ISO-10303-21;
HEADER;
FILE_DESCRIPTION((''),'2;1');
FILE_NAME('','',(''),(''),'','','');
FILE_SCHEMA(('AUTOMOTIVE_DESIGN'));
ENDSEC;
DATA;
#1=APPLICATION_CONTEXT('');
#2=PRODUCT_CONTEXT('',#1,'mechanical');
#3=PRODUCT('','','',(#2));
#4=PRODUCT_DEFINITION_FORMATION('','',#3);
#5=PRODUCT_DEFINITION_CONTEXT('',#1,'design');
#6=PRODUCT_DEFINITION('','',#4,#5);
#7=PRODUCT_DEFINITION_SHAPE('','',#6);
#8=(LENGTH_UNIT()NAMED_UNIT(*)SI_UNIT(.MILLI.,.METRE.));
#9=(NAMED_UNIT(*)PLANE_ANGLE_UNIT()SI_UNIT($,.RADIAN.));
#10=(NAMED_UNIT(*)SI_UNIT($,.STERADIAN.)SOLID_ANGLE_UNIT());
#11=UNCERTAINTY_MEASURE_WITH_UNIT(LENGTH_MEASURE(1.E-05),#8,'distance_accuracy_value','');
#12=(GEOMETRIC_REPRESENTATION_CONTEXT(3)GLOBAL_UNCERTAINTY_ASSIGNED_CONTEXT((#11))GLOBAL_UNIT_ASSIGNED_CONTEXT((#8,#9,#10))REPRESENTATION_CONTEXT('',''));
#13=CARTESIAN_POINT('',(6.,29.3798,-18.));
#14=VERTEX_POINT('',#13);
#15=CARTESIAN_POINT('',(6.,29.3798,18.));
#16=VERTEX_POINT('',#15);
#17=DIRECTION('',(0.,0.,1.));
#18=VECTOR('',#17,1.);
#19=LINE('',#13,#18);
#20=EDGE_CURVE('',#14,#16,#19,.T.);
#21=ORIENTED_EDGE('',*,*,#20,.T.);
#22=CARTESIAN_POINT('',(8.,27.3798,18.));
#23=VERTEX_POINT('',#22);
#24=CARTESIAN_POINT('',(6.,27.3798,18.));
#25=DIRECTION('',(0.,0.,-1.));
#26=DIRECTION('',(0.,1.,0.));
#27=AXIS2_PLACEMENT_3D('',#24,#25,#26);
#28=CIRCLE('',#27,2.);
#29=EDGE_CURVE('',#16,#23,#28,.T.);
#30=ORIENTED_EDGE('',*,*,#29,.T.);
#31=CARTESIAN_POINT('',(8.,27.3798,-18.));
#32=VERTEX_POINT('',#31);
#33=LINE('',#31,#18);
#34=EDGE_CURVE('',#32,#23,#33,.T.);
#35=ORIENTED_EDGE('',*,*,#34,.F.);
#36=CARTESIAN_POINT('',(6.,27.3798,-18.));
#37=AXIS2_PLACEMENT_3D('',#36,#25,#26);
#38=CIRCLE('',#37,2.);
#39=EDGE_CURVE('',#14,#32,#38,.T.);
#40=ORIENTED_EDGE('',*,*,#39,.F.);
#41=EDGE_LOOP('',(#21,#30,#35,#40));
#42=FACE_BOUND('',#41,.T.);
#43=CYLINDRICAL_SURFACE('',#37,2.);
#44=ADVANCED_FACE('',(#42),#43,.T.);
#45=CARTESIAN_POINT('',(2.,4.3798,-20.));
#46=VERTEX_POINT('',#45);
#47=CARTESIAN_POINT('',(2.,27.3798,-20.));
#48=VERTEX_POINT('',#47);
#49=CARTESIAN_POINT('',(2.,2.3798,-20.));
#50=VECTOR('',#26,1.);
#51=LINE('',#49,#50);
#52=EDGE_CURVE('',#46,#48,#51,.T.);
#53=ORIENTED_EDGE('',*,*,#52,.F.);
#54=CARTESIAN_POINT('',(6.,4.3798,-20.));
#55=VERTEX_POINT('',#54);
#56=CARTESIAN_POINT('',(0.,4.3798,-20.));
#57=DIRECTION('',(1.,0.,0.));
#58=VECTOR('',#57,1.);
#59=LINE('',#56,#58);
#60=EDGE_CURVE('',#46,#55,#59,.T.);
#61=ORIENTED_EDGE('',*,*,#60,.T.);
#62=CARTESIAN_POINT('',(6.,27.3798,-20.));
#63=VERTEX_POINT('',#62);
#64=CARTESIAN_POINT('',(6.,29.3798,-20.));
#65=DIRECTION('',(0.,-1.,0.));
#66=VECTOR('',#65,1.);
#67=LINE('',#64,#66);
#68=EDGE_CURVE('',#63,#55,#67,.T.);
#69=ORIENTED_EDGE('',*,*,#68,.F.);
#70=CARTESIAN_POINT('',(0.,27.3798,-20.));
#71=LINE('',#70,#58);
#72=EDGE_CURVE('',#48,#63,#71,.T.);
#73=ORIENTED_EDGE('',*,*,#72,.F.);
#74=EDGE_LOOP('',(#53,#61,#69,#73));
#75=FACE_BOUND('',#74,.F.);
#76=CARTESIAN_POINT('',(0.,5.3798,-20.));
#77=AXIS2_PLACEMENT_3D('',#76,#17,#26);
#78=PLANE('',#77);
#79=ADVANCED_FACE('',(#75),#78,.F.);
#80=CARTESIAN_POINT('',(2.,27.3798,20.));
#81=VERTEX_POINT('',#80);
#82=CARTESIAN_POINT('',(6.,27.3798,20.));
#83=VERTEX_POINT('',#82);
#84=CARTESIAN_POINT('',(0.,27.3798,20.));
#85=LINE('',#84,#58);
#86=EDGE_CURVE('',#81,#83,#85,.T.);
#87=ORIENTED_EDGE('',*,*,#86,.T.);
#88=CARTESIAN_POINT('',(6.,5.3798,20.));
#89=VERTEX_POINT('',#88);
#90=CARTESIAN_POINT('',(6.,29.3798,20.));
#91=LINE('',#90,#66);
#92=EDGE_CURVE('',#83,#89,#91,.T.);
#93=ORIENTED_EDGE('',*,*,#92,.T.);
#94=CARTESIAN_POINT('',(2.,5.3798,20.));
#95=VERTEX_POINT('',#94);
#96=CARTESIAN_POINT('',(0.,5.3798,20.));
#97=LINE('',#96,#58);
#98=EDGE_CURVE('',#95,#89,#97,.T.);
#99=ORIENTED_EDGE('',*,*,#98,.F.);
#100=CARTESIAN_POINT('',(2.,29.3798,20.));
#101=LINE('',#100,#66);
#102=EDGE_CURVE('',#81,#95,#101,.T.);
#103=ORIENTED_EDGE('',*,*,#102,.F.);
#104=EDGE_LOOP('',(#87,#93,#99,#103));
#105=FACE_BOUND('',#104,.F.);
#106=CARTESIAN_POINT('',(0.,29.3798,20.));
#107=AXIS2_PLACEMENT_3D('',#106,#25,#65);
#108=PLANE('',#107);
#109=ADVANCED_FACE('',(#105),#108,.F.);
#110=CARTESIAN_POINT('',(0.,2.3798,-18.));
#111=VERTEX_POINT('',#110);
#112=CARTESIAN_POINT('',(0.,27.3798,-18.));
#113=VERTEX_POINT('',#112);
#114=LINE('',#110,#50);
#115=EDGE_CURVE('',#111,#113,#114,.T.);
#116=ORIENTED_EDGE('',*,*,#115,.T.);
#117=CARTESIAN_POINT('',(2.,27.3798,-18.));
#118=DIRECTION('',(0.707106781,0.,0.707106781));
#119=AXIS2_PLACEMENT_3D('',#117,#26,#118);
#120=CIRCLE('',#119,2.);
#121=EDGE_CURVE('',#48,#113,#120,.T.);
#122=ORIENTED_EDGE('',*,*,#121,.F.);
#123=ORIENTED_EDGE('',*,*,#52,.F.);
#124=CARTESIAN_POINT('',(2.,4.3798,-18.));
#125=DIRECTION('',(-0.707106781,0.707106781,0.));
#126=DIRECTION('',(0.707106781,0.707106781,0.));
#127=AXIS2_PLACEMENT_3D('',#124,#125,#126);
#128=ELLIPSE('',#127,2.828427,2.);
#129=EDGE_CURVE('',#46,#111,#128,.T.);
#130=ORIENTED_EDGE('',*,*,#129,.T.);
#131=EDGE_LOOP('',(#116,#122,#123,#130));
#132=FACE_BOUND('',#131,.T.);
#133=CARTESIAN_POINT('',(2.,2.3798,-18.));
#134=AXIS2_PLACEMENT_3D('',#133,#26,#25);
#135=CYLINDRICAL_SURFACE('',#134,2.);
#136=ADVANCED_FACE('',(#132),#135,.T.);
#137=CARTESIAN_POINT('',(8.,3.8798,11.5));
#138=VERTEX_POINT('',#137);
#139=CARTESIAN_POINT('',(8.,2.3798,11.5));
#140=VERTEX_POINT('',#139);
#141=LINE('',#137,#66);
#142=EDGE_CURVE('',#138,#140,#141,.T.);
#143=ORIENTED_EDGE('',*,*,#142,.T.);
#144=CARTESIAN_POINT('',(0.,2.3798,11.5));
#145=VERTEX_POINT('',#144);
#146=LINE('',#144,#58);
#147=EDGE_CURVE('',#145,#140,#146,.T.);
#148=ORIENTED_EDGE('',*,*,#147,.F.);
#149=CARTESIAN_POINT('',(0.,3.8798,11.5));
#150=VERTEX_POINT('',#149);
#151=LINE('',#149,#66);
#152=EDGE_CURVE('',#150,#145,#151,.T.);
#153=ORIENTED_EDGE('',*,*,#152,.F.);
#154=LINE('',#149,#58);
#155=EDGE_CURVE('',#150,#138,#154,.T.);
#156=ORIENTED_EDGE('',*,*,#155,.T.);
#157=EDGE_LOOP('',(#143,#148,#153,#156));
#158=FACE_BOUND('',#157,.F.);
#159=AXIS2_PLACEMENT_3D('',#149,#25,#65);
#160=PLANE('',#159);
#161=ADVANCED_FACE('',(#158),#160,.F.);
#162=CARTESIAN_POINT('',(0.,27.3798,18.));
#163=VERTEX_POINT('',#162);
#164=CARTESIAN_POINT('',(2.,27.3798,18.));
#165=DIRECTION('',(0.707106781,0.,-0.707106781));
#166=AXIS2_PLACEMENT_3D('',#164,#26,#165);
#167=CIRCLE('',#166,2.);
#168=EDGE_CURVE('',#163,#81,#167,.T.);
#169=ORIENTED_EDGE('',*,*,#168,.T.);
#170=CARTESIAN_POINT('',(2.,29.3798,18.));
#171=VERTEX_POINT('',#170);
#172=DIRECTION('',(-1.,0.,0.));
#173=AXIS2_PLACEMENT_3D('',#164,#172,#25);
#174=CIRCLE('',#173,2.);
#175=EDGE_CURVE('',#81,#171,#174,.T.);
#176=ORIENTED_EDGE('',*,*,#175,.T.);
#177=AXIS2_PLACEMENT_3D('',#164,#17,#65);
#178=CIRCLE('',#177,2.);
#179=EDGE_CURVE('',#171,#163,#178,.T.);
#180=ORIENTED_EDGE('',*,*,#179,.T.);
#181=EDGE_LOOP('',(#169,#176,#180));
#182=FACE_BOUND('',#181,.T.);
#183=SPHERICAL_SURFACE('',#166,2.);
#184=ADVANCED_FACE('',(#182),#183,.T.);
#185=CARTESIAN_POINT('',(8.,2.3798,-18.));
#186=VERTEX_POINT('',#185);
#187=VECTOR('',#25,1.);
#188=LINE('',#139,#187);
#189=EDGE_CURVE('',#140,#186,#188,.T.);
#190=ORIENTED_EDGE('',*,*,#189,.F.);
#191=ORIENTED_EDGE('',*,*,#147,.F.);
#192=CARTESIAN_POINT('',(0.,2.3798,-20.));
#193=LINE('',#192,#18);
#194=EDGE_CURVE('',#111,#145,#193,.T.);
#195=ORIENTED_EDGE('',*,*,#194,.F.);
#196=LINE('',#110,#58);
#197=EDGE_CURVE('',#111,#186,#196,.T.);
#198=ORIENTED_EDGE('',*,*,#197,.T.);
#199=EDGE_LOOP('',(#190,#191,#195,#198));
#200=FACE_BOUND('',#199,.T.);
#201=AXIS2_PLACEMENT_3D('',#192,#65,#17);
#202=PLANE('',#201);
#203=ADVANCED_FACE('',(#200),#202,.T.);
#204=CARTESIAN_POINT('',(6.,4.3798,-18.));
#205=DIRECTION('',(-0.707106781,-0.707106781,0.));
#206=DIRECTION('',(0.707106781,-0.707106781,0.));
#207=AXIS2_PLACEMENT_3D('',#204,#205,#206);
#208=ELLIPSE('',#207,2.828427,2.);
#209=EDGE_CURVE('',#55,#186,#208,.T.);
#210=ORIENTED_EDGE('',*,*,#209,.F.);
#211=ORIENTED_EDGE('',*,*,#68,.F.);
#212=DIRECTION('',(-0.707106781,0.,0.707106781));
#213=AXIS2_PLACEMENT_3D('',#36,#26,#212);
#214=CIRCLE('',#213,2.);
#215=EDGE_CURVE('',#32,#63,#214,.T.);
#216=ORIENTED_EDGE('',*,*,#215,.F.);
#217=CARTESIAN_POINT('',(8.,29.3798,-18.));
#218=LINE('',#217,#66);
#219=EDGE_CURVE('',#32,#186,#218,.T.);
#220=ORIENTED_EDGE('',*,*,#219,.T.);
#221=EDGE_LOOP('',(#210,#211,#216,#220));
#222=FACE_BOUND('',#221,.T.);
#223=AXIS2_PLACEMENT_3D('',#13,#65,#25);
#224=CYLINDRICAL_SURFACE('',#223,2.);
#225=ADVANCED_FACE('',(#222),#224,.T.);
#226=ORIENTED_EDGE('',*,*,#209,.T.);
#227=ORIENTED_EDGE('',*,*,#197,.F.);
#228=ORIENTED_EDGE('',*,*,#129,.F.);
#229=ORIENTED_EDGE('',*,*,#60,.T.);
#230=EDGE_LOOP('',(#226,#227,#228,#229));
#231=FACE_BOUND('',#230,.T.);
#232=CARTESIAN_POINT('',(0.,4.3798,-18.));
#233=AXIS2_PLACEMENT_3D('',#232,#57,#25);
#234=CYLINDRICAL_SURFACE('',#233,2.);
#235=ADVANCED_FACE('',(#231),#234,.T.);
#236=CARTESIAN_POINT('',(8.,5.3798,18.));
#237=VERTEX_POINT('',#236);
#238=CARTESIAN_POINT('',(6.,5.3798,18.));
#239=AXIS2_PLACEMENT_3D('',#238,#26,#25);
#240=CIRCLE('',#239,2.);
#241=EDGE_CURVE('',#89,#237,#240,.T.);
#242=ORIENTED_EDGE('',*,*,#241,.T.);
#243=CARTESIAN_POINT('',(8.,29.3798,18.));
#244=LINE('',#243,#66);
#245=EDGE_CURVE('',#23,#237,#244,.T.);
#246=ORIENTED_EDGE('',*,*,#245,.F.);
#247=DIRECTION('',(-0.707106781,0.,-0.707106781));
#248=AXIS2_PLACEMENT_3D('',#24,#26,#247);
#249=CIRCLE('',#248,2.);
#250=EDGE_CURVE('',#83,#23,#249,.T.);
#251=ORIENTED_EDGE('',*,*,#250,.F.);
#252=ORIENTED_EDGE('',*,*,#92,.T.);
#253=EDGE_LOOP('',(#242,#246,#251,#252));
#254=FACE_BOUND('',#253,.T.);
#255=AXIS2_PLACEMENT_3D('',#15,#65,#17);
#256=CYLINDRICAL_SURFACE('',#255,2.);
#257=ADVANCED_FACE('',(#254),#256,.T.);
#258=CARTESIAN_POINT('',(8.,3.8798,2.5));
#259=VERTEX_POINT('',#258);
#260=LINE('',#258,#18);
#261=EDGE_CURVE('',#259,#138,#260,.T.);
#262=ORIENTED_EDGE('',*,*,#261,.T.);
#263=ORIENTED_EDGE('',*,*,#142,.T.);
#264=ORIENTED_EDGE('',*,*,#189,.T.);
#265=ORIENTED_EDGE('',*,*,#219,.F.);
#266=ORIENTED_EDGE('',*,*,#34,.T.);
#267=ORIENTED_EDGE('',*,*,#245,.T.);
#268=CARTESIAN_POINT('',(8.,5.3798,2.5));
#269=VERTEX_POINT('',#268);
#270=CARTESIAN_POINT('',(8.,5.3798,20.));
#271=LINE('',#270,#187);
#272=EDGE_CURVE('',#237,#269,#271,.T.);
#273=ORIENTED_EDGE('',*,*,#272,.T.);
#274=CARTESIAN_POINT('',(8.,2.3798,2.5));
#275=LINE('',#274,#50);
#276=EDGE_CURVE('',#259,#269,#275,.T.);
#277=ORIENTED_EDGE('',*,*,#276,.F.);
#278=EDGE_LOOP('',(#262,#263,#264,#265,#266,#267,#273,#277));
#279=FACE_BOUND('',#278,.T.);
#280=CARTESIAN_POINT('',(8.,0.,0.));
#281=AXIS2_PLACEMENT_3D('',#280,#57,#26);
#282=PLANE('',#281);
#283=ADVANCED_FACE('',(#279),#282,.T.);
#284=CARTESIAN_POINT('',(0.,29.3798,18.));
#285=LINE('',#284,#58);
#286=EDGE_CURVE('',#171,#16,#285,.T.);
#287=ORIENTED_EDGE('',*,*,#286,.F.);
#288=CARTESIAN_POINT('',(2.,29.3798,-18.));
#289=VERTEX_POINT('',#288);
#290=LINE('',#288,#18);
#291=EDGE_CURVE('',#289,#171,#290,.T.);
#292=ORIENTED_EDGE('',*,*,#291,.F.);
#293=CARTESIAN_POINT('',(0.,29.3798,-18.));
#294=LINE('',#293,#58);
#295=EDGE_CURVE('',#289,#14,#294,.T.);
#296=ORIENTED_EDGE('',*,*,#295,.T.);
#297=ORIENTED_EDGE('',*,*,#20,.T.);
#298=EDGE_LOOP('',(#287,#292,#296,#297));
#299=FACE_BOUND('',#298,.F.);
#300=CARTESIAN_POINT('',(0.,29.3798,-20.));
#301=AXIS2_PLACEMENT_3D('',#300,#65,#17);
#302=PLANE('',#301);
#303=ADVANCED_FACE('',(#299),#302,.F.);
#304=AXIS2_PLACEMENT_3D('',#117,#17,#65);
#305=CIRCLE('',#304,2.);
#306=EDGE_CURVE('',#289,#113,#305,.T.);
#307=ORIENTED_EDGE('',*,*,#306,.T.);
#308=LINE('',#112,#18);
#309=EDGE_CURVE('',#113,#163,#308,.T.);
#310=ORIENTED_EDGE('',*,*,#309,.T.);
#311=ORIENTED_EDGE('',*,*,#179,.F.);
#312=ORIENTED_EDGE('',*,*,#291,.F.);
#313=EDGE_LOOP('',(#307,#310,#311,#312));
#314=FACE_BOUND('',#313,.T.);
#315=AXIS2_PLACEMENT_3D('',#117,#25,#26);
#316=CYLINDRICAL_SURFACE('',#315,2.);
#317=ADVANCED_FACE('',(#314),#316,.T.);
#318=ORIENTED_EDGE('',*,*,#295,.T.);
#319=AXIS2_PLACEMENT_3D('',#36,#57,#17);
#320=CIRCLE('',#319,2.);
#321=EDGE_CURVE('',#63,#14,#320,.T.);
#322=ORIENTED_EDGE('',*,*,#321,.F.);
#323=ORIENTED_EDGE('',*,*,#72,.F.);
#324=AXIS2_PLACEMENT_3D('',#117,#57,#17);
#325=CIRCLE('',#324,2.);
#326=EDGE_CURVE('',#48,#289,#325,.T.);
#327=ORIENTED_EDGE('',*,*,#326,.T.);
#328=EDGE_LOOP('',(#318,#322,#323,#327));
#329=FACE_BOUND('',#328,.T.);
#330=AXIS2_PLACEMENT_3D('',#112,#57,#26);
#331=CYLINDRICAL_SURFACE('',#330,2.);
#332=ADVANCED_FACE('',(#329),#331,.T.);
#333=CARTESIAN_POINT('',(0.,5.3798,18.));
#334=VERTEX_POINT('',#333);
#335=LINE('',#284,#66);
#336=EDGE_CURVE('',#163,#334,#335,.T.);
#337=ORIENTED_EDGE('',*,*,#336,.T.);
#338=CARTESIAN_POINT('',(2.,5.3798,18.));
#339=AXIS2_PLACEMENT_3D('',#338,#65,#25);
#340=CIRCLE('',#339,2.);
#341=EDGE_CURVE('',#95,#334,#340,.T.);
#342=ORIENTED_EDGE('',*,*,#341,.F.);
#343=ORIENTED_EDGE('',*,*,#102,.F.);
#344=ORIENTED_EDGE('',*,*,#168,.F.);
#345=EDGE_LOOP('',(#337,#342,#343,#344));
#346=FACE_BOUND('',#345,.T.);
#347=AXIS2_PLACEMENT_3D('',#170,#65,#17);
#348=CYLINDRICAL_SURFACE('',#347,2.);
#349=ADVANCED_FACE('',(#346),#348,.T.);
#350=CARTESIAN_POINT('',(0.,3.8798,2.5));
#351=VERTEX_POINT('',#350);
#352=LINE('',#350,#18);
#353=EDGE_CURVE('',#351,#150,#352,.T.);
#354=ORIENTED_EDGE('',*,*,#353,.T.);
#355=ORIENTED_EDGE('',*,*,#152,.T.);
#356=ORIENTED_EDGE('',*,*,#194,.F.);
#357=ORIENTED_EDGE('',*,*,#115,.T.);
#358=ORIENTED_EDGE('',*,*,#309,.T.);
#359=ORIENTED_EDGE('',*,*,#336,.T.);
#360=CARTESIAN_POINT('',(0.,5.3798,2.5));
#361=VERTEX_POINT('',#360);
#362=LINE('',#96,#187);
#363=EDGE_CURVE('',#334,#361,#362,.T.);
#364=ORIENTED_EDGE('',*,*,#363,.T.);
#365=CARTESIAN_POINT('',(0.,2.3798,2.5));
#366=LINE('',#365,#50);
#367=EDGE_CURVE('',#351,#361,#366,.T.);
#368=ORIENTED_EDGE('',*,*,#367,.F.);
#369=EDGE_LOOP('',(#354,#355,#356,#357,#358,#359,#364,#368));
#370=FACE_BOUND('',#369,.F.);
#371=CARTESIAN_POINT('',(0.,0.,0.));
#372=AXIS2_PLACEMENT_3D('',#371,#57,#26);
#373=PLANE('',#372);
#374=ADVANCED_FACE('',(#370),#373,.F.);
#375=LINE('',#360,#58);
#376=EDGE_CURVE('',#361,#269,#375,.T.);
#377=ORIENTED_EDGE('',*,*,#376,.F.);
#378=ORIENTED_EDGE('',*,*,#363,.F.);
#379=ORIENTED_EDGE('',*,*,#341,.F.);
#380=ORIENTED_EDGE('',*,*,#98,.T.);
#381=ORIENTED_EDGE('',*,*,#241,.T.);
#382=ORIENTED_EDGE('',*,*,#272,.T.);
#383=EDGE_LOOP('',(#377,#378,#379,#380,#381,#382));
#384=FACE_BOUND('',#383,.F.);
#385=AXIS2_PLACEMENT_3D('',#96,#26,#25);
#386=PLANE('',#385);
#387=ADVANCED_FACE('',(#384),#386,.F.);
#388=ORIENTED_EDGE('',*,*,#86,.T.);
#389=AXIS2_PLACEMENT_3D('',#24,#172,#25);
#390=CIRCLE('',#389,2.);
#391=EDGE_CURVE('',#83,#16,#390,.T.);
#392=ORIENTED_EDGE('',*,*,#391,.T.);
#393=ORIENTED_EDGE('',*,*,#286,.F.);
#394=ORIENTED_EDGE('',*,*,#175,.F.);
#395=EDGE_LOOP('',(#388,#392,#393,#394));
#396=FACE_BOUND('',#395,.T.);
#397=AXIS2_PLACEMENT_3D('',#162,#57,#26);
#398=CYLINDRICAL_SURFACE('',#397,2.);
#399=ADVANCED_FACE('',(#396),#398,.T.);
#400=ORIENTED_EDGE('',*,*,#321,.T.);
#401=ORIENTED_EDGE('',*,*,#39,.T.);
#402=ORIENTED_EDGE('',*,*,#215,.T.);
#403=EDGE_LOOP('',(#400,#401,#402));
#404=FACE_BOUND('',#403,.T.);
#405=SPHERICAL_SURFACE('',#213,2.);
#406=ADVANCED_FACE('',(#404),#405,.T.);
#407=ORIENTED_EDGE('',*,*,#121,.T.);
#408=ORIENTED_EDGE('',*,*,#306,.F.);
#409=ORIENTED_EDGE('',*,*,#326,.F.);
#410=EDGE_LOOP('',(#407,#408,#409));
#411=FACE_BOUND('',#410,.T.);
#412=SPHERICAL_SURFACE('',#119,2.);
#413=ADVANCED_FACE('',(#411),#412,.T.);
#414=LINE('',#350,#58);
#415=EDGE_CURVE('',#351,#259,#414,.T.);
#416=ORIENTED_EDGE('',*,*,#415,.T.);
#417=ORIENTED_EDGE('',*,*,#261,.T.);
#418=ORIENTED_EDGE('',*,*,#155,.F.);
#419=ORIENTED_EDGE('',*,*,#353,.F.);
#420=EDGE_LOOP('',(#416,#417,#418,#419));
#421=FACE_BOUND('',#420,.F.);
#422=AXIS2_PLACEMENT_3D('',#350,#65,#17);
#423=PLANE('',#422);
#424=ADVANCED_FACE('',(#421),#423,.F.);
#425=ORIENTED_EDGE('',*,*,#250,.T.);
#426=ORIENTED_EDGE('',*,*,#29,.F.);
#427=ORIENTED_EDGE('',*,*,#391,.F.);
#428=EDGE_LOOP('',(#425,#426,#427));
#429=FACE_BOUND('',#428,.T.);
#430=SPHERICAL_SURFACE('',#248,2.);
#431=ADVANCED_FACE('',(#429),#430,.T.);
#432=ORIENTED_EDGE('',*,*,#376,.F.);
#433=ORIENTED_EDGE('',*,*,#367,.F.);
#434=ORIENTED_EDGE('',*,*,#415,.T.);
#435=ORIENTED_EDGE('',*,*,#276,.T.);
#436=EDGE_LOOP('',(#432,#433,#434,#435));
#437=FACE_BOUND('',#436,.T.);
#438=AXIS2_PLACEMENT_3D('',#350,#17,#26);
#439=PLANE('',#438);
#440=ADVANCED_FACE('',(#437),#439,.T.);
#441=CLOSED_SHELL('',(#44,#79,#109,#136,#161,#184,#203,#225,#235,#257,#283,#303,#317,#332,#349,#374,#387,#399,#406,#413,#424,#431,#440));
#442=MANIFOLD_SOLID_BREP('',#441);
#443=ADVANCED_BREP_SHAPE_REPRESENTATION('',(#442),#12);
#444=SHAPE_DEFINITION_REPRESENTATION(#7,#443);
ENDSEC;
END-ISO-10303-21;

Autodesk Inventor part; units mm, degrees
ref_plane "YZ Plane" through (0, 0, 0) normal (1, 0, 0) x (0, 1, 0)
ref_plane "XZ Plane" through (0, 0, 0) normal (0, 1, 0) x (-1, 0, 0)
ref_plane "XY Plane" through (0, 0, 0) normal (0, 0, 1) x (1, 0, 0)
sketch "Sketch1" plane through (0, 0, 0) normal (1, 0, 0) x (0, 1, 0)
  line L0 (29.3798, 20) -> (5.3798, 20)
  line L1 (5.3798, 20) -> (5.3798, -20)
  line L2 (5.3798, -20) -> (29.3798, -20)
  line L3 (29.3798, -20) -> (29.3798, 20)
  line L4 (5.3798, -20) -> (2.3798, -20)
  line L5 (2.3798, -20) -> (2.3798, 2.5)
  line L6 (2.3798, 2.5) -> (5.3798, 2.5)
  line L7 (5.3798, 2.5) -> (5.3798, -20)
  line L8 (2.3798, 2.5) -> (3.8798, 2.5)
  line L9 (3.8798, 2.5) -> (3.8798, 11.5)
  line L10 (3.8798, 11.5) -> (2.3798, 11.5)
  line L11 (2.3798, 11.5) -> (2.3798, 2.5)
  point P0 (0, 0)
  point P1 (5.3798, 0)
  dimension "d0" = 24
  dimension "d1" = 40
  dimension "d2" = 3
  dimension "d3" = 22.5
  dimension "d4" = 1.5
  dimension "d5" = 9
extrude "Extrusion1" add sketch "Sketch1" along normal blind 8
fillet "Fillet1" radius 2 7 edges at (0, 17.3798, 20) (8, 17.3798, 20) (0, 15.8798, -20) (8, 15.8798, -20) (4, 2.3798, -20) (4, 29.3798, -20) (4, 29.3798, 20)
fillet "Fillet2" radius 2 6 edges at (7.4142, 28.794, 19.4142) (7.4142, 28.794, -19.4142) (8, 29.3798, 0) (0.5858, 28.794, 19.4142) (0.5858, 28.794, -19.4142) (0, 29.3798, 0)
properties part number "GATE servo motor"
